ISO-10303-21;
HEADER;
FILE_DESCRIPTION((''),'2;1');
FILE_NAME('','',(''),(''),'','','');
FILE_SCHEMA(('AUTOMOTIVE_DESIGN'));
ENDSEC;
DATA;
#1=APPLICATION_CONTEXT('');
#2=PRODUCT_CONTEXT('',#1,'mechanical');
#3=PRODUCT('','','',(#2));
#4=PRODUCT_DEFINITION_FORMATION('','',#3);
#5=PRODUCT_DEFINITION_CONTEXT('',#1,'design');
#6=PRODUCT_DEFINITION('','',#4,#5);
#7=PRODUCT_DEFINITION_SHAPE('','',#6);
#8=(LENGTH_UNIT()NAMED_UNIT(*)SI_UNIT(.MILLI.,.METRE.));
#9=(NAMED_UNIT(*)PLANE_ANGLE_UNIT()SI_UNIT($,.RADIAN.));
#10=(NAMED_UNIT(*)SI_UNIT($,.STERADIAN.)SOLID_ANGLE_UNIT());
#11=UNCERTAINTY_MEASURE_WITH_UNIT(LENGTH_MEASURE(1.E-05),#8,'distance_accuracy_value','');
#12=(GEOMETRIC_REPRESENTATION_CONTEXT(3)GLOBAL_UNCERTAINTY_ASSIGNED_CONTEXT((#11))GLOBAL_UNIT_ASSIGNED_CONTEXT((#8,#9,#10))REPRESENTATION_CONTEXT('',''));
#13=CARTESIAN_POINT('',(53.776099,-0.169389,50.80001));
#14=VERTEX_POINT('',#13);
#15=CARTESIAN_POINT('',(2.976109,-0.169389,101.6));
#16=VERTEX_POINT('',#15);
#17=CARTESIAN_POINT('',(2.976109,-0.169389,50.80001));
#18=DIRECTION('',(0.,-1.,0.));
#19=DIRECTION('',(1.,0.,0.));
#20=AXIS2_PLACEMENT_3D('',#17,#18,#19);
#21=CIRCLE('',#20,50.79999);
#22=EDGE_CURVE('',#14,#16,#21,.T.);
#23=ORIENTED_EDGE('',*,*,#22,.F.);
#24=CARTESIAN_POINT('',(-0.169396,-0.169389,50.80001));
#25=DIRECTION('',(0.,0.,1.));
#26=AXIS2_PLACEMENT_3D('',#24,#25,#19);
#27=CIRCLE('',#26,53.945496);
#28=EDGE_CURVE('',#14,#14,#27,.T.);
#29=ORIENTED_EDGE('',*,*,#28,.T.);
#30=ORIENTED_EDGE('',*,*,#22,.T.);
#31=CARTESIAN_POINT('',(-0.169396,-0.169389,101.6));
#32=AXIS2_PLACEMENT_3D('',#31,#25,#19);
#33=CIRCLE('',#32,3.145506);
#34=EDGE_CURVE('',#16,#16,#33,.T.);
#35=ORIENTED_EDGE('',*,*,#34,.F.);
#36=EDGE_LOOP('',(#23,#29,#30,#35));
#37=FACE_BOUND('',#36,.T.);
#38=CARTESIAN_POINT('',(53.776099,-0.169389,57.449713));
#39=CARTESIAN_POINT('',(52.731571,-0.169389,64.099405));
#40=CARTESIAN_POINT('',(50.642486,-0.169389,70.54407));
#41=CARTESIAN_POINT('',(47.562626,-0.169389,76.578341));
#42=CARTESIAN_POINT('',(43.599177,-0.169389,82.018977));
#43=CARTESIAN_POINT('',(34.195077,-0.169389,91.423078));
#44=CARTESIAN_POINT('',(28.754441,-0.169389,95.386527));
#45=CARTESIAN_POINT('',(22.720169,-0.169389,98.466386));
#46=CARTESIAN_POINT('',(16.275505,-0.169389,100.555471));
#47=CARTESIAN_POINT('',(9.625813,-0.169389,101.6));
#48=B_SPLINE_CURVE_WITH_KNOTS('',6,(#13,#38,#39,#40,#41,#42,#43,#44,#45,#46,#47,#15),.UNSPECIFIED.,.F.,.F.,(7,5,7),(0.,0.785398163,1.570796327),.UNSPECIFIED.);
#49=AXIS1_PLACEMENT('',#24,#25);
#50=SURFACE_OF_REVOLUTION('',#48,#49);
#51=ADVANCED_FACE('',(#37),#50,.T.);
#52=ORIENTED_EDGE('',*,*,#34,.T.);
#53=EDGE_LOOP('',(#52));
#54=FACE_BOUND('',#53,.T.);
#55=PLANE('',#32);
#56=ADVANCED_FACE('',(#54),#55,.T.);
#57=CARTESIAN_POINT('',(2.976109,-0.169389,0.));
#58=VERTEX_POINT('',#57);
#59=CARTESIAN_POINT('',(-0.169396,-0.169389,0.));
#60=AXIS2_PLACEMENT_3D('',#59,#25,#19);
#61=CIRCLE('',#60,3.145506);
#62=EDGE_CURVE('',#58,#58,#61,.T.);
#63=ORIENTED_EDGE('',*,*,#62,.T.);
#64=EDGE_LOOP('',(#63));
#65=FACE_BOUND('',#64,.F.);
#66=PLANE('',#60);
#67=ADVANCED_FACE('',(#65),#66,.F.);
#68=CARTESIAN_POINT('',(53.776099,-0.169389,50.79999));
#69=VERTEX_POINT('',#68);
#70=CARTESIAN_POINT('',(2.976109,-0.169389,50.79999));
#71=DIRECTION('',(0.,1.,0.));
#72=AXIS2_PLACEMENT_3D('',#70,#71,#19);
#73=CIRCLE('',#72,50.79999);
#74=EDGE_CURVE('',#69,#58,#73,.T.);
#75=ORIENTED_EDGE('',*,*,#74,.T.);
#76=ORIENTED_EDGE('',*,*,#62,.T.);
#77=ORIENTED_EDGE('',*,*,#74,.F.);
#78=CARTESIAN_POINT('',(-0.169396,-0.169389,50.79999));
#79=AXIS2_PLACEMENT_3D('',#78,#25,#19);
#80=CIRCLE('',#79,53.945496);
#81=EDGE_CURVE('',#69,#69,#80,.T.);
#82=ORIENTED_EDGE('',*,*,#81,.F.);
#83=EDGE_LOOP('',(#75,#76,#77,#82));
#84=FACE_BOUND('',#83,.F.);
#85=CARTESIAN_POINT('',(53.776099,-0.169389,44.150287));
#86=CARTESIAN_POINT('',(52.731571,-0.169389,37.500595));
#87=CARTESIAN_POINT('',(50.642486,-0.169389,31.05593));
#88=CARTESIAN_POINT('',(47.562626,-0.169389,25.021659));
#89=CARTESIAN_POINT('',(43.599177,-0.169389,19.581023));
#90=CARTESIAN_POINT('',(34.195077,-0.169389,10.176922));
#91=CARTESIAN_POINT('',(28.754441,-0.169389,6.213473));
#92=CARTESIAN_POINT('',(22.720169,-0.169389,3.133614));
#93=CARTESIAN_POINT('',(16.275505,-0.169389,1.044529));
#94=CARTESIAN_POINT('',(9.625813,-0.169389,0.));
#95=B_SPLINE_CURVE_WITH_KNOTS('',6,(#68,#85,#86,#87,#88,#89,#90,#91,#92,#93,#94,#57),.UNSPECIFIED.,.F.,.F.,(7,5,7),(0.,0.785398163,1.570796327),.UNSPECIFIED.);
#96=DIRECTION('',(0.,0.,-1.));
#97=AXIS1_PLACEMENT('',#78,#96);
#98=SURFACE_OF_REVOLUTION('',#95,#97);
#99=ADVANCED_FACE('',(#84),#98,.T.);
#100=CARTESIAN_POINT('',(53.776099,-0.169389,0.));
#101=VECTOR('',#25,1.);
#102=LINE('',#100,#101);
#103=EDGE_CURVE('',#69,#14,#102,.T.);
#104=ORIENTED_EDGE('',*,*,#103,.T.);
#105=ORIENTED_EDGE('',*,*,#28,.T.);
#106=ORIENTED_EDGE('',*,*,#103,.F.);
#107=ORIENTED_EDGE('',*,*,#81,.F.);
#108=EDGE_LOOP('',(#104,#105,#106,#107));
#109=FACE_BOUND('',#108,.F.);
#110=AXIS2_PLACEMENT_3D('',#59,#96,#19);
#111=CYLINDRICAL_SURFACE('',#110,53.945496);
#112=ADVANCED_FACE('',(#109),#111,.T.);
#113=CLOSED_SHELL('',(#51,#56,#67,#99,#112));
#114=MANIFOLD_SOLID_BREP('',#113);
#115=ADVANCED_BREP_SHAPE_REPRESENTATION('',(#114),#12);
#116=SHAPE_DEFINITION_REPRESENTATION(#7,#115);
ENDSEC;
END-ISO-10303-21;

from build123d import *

# Parameters (mm, degrees)
F0_R     = 53.9454958118
F1_DEPTH = 101.6
F2_R     = 50.79999


# Not quite as in the source:
# - a fillet or chamfer is up to 0.001 mm smaller than in the source, because OpenCascade refuses the exact size


with BuildPart() as f1:
    # F0 (on Top) → F1 (new body)
    with BuildSketch(Plane.XY):
        with Locations((-0.1693964005, -0.1693889499)):
            Circle(F0_R)
    extrude(amount=F1_DEPTH)

    # F2 (radius 50.8 in the source; OpenCascade refuses exactly that, so slightly less here)
    f2_edges = [f1.edges().sort_by_distance(p)[0] for p in [
        (-54.114892, -0.169389, 101.6),
        (-54.114892, -0.169389, 0),
    ]]
    fillet(f2_edges, radius=F2_R)


solid = f1.part
